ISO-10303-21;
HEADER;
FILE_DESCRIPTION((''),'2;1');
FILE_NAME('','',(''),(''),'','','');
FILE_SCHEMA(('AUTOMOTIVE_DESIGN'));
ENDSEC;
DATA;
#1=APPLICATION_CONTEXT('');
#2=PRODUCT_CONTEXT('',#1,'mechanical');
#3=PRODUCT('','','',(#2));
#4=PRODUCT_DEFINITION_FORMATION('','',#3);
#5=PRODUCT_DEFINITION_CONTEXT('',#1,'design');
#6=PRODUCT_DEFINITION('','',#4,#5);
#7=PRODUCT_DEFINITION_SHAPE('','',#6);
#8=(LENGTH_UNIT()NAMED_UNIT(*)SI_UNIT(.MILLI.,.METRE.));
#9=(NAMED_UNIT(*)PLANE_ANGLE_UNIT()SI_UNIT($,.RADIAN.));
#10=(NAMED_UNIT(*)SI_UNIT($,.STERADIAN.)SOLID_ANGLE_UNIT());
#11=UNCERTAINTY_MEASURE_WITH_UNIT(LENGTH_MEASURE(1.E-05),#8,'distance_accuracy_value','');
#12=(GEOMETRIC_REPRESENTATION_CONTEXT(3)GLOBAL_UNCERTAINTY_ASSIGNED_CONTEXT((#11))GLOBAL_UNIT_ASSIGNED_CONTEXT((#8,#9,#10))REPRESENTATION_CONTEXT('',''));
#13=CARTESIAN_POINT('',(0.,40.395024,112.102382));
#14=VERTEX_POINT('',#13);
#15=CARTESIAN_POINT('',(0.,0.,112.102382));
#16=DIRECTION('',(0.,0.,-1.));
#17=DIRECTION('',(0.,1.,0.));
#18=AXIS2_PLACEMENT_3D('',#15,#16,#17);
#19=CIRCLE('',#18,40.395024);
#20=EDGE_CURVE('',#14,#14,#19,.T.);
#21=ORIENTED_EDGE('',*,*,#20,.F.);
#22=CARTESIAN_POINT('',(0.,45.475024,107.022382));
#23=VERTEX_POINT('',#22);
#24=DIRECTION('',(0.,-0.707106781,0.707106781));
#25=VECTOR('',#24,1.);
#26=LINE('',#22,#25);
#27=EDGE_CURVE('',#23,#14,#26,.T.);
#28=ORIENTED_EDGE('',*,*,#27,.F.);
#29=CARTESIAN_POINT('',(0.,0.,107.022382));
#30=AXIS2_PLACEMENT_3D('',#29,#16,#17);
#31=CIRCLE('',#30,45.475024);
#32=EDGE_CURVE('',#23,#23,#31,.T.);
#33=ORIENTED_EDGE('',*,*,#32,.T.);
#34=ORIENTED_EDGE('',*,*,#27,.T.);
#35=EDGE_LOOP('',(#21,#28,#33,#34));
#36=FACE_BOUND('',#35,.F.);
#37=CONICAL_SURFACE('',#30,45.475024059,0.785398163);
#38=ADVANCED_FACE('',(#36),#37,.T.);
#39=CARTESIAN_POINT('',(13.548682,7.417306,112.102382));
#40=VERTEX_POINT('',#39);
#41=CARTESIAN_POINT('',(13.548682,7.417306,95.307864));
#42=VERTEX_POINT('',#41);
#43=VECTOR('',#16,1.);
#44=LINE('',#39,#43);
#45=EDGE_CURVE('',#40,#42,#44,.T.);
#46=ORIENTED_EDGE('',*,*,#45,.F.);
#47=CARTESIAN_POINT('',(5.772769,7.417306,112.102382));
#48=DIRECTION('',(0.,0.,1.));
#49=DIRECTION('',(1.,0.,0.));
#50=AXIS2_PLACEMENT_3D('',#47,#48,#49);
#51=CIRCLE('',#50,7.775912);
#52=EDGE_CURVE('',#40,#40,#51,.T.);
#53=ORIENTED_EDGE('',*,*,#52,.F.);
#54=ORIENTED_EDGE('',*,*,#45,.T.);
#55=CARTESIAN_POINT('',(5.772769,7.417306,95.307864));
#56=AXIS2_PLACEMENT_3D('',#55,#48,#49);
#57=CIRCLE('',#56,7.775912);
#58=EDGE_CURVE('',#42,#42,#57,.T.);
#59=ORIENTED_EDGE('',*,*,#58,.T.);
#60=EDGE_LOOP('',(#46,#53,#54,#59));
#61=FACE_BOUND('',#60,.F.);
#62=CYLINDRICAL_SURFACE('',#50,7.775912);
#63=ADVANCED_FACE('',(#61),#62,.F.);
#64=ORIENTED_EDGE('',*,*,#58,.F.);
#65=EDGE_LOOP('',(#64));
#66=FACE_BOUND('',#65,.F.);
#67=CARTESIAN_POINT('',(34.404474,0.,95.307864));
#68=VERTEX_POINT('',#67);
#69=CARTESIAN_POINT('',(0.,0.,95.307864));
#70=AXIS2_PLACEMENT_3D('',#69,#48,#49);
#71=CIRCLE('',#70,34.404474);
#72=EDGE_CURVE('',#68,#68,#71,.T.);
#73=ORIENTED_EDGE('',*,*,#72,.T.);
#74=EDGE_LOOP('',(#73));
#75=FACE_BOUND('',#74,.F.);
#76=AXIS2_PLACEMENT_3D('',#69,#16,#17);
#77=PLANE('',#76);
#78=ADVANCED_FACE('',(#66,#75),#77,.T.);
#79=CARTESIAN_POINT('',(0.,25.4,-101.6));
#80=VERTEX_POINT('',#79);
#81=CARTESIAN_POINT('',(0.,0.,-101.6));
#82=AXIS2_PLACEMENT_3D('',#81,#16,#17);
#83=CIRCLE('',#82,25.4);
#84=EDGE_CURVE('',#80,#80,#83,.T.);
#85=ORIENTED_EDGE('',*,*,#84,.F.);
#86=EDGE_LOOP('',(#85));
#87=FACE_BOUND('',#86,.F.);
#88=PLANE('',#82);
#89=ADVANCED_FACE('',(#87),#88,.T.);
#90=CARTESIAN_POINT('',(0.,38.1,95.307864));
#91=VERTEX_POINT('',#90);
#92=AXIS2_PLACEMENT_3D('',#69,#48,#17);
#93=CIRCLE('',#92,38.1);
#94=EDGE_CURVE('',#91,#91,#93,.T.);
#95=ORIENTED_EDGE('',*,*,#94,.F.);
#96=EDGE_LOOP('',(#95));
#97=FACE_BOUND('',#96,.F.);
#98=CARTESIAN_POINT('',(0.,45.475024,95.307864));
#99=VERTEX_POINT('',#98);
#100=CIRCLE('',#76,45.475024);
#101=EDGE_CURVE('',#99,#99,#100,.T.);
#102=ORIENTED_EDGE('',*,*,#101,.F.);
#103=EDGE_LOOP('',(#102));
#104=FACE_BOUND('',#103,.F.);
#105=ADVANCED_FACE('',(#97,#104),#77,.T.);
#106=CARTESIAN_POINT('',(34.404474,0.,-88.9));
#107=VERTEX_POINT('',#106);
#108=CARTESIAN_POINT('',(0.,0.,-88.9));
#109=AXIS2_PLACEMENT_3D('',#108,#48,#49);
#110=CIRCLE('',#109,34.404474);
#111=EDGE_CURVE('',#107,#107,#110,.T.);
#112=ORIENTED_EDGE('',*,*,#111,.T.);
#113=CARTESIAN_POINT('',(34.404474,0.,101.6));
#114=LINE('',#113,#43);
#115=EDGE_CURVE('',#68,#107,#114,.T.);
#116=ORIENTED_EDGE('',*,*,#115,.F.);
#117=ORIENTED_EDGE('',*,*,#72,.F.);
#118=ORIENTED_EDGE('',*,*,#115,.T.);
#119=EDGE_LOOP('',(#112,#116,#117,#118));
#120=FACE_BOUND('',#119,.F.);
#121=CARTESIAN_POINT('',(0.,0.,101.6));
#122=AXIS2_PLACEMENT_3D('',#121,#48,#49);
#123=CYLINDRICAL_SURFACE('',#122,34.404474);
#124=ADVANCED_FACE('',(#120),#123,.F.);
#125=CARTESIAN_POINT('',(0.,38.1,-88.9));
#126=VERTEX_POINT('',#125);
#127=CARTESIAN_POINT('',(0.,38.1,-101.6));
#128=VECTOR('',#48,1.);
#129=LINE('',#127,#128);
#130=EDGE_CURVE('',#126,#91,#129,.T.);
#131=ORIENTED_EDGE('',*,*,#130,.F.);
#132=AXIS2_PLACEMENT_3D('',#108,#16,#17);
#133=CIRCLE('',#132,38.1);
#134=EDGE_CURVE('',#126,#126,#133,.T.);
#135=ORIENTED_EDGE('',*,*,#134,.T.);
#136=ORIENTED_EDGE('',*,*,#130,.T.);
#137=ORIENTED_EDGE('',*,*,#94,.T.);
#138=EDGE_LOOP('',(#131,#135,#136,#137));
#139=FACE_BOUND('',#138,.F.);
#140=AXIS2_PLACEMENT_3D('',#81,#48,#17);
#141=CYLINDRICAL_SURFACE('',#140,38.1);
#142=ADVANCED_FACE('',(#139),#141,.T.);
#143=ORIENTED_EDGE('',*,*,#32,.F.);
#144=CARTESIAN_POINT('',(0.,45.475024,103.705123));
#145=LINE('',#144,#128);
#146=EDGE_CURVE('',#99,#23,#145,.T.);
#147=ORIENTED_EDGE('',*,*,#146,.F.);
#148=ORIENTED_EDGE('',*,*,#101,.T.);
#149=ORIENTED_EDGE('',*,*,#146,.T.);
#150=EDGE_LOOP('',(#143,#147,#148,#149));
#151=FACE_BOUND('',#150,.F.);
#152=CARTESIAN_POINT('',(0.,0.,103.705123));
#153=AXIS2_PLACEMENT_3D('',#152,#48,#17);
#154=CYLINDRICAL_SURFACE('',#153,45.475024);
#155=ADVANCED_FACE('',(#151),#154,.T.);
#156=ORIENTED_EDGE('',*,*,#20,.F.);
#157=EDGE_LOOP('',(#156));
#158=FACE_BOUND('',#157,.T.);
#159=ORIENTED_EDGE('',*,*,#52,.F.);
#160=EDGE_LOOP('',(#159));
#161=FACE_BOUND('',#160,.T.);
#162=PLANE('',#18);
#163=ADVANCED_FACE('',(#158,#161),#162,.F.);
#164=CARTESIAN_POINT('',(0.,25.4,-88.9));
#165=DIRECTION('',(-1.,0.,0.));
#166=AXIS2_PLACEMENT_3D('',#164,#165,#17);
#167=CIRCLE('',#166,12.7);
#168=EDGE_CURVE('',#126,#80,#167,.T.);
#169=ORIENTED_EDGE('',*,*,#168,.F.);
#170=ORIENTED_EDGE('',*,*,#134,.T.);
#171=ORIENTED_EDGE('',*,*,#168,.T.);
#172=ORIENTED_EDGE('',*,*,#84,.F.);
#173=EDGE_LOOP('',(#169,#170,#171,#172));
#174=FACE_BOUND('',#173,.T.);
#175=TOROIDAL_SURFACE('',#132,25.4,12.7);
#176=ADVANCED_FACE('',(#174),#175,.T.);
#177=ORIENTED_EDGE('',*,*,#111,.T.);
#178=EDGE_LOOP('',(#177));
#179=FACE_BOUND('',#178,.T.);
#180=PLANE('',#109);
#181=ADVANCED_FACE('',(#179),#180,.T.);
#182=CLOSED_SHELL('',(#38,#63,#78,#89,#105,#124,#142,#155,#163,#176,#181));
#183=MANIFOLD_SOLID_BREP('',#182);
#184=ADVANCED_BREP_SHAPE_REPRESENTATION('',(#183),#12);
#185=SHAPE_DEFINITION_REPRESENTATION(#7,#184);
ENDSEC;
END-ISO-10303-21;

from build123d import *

# Parameters (mm, degrees)
F2_R      = 34.4044739417
F3_DEPTH  = 190.5
F6_R      = 12.7
F8_W      = 45.4750240587
F8_H      = 16.7945176363
F10_R     = 7.7759121847
F11_DEPTH = 177.8
F12_SIZE  = 5.08


# Not quite as in the source:
# - a fillet or chamfer that OpenCascade refuses, or shapes differently, is made with other operations: its cross-section is extruded or revolved along the edge and cut away or added
# - the program builds the solid bodies; features that only make, move or delete a surface that nothing else refers to are left out


with BuildPart() as f1:
    # F0 (on Right) → F1 (revolve)
    with BuildSketch(Plane.YZ):
        Polygon((38.1, -101.6), (38.1, 0), (38.1, 101.6), (0, 101.6), (0, 0), (0, -101.6), align=None)
    revolve(axis=Axis((0, 0, -50.8), (0, 0, -1)))

    # F2 (on face) → F3 (cut)
    with BuildSketch(Plane.XY.offset(101.6)):
        Circle(F2_R)
    extrude(amount=-F3_DEPTH, mode=Mode.SUBTRACT)

    # F6
    f6_edges = [f1.edges().sort_by_distance(p)[0] for p in [
        (0, -38.1, -101.6),
    ]]
    fillet(f6_edges, radius=F6_R)

    # F7: fillet of radius 5.08 on 1 edges, made by hand

    # F7_s1 → F7_t2 (revolve, cut)
    with BuildSketch(Plane.YZ):
        with BuildLine():
            ThreePointArc((38.1, 96.52), (36.6121024484, 100.1121024484), (33.02, 101.6))
            Line((33.02, 101.6), (38.1, 101.6))
            Line((38.1, 101.6), (38.1, 96.52))
        make_face()
    revolve(axis=Axis((0, 0, 101.6), (0, 0, -1)), mode=Mode.SUBTRACT)

    # F8 (on Right) → F9 (revolve)
    with BuildSketch(Plane.YZ):
        with Locations((22.7375120293, 103.7051230669)):
            Rectangle(F8_W, F8_H)
    revolve(axis=Axis((0, 0, 103.7051230669), (0, 0, -1)))

    # F10 (on face) → F11 (cut)
    with BuildSketch(Plane.XY.offset(112.1023818851)):
        with Locations((5.7727694511, 7.4173058383)):
            Circle(F10_R)
    extrude(amount=-F11_DEPTH, mode=Mode.SUBTRACT)

    # F12
    f12_edges = [f1.edges().sort_by_distance(p)[0] for p in [
        (0, -45.475024, 112.102382),
    ]]
    chamfer(f12_edges, length=F12_SIZE)


solid = f1.part
